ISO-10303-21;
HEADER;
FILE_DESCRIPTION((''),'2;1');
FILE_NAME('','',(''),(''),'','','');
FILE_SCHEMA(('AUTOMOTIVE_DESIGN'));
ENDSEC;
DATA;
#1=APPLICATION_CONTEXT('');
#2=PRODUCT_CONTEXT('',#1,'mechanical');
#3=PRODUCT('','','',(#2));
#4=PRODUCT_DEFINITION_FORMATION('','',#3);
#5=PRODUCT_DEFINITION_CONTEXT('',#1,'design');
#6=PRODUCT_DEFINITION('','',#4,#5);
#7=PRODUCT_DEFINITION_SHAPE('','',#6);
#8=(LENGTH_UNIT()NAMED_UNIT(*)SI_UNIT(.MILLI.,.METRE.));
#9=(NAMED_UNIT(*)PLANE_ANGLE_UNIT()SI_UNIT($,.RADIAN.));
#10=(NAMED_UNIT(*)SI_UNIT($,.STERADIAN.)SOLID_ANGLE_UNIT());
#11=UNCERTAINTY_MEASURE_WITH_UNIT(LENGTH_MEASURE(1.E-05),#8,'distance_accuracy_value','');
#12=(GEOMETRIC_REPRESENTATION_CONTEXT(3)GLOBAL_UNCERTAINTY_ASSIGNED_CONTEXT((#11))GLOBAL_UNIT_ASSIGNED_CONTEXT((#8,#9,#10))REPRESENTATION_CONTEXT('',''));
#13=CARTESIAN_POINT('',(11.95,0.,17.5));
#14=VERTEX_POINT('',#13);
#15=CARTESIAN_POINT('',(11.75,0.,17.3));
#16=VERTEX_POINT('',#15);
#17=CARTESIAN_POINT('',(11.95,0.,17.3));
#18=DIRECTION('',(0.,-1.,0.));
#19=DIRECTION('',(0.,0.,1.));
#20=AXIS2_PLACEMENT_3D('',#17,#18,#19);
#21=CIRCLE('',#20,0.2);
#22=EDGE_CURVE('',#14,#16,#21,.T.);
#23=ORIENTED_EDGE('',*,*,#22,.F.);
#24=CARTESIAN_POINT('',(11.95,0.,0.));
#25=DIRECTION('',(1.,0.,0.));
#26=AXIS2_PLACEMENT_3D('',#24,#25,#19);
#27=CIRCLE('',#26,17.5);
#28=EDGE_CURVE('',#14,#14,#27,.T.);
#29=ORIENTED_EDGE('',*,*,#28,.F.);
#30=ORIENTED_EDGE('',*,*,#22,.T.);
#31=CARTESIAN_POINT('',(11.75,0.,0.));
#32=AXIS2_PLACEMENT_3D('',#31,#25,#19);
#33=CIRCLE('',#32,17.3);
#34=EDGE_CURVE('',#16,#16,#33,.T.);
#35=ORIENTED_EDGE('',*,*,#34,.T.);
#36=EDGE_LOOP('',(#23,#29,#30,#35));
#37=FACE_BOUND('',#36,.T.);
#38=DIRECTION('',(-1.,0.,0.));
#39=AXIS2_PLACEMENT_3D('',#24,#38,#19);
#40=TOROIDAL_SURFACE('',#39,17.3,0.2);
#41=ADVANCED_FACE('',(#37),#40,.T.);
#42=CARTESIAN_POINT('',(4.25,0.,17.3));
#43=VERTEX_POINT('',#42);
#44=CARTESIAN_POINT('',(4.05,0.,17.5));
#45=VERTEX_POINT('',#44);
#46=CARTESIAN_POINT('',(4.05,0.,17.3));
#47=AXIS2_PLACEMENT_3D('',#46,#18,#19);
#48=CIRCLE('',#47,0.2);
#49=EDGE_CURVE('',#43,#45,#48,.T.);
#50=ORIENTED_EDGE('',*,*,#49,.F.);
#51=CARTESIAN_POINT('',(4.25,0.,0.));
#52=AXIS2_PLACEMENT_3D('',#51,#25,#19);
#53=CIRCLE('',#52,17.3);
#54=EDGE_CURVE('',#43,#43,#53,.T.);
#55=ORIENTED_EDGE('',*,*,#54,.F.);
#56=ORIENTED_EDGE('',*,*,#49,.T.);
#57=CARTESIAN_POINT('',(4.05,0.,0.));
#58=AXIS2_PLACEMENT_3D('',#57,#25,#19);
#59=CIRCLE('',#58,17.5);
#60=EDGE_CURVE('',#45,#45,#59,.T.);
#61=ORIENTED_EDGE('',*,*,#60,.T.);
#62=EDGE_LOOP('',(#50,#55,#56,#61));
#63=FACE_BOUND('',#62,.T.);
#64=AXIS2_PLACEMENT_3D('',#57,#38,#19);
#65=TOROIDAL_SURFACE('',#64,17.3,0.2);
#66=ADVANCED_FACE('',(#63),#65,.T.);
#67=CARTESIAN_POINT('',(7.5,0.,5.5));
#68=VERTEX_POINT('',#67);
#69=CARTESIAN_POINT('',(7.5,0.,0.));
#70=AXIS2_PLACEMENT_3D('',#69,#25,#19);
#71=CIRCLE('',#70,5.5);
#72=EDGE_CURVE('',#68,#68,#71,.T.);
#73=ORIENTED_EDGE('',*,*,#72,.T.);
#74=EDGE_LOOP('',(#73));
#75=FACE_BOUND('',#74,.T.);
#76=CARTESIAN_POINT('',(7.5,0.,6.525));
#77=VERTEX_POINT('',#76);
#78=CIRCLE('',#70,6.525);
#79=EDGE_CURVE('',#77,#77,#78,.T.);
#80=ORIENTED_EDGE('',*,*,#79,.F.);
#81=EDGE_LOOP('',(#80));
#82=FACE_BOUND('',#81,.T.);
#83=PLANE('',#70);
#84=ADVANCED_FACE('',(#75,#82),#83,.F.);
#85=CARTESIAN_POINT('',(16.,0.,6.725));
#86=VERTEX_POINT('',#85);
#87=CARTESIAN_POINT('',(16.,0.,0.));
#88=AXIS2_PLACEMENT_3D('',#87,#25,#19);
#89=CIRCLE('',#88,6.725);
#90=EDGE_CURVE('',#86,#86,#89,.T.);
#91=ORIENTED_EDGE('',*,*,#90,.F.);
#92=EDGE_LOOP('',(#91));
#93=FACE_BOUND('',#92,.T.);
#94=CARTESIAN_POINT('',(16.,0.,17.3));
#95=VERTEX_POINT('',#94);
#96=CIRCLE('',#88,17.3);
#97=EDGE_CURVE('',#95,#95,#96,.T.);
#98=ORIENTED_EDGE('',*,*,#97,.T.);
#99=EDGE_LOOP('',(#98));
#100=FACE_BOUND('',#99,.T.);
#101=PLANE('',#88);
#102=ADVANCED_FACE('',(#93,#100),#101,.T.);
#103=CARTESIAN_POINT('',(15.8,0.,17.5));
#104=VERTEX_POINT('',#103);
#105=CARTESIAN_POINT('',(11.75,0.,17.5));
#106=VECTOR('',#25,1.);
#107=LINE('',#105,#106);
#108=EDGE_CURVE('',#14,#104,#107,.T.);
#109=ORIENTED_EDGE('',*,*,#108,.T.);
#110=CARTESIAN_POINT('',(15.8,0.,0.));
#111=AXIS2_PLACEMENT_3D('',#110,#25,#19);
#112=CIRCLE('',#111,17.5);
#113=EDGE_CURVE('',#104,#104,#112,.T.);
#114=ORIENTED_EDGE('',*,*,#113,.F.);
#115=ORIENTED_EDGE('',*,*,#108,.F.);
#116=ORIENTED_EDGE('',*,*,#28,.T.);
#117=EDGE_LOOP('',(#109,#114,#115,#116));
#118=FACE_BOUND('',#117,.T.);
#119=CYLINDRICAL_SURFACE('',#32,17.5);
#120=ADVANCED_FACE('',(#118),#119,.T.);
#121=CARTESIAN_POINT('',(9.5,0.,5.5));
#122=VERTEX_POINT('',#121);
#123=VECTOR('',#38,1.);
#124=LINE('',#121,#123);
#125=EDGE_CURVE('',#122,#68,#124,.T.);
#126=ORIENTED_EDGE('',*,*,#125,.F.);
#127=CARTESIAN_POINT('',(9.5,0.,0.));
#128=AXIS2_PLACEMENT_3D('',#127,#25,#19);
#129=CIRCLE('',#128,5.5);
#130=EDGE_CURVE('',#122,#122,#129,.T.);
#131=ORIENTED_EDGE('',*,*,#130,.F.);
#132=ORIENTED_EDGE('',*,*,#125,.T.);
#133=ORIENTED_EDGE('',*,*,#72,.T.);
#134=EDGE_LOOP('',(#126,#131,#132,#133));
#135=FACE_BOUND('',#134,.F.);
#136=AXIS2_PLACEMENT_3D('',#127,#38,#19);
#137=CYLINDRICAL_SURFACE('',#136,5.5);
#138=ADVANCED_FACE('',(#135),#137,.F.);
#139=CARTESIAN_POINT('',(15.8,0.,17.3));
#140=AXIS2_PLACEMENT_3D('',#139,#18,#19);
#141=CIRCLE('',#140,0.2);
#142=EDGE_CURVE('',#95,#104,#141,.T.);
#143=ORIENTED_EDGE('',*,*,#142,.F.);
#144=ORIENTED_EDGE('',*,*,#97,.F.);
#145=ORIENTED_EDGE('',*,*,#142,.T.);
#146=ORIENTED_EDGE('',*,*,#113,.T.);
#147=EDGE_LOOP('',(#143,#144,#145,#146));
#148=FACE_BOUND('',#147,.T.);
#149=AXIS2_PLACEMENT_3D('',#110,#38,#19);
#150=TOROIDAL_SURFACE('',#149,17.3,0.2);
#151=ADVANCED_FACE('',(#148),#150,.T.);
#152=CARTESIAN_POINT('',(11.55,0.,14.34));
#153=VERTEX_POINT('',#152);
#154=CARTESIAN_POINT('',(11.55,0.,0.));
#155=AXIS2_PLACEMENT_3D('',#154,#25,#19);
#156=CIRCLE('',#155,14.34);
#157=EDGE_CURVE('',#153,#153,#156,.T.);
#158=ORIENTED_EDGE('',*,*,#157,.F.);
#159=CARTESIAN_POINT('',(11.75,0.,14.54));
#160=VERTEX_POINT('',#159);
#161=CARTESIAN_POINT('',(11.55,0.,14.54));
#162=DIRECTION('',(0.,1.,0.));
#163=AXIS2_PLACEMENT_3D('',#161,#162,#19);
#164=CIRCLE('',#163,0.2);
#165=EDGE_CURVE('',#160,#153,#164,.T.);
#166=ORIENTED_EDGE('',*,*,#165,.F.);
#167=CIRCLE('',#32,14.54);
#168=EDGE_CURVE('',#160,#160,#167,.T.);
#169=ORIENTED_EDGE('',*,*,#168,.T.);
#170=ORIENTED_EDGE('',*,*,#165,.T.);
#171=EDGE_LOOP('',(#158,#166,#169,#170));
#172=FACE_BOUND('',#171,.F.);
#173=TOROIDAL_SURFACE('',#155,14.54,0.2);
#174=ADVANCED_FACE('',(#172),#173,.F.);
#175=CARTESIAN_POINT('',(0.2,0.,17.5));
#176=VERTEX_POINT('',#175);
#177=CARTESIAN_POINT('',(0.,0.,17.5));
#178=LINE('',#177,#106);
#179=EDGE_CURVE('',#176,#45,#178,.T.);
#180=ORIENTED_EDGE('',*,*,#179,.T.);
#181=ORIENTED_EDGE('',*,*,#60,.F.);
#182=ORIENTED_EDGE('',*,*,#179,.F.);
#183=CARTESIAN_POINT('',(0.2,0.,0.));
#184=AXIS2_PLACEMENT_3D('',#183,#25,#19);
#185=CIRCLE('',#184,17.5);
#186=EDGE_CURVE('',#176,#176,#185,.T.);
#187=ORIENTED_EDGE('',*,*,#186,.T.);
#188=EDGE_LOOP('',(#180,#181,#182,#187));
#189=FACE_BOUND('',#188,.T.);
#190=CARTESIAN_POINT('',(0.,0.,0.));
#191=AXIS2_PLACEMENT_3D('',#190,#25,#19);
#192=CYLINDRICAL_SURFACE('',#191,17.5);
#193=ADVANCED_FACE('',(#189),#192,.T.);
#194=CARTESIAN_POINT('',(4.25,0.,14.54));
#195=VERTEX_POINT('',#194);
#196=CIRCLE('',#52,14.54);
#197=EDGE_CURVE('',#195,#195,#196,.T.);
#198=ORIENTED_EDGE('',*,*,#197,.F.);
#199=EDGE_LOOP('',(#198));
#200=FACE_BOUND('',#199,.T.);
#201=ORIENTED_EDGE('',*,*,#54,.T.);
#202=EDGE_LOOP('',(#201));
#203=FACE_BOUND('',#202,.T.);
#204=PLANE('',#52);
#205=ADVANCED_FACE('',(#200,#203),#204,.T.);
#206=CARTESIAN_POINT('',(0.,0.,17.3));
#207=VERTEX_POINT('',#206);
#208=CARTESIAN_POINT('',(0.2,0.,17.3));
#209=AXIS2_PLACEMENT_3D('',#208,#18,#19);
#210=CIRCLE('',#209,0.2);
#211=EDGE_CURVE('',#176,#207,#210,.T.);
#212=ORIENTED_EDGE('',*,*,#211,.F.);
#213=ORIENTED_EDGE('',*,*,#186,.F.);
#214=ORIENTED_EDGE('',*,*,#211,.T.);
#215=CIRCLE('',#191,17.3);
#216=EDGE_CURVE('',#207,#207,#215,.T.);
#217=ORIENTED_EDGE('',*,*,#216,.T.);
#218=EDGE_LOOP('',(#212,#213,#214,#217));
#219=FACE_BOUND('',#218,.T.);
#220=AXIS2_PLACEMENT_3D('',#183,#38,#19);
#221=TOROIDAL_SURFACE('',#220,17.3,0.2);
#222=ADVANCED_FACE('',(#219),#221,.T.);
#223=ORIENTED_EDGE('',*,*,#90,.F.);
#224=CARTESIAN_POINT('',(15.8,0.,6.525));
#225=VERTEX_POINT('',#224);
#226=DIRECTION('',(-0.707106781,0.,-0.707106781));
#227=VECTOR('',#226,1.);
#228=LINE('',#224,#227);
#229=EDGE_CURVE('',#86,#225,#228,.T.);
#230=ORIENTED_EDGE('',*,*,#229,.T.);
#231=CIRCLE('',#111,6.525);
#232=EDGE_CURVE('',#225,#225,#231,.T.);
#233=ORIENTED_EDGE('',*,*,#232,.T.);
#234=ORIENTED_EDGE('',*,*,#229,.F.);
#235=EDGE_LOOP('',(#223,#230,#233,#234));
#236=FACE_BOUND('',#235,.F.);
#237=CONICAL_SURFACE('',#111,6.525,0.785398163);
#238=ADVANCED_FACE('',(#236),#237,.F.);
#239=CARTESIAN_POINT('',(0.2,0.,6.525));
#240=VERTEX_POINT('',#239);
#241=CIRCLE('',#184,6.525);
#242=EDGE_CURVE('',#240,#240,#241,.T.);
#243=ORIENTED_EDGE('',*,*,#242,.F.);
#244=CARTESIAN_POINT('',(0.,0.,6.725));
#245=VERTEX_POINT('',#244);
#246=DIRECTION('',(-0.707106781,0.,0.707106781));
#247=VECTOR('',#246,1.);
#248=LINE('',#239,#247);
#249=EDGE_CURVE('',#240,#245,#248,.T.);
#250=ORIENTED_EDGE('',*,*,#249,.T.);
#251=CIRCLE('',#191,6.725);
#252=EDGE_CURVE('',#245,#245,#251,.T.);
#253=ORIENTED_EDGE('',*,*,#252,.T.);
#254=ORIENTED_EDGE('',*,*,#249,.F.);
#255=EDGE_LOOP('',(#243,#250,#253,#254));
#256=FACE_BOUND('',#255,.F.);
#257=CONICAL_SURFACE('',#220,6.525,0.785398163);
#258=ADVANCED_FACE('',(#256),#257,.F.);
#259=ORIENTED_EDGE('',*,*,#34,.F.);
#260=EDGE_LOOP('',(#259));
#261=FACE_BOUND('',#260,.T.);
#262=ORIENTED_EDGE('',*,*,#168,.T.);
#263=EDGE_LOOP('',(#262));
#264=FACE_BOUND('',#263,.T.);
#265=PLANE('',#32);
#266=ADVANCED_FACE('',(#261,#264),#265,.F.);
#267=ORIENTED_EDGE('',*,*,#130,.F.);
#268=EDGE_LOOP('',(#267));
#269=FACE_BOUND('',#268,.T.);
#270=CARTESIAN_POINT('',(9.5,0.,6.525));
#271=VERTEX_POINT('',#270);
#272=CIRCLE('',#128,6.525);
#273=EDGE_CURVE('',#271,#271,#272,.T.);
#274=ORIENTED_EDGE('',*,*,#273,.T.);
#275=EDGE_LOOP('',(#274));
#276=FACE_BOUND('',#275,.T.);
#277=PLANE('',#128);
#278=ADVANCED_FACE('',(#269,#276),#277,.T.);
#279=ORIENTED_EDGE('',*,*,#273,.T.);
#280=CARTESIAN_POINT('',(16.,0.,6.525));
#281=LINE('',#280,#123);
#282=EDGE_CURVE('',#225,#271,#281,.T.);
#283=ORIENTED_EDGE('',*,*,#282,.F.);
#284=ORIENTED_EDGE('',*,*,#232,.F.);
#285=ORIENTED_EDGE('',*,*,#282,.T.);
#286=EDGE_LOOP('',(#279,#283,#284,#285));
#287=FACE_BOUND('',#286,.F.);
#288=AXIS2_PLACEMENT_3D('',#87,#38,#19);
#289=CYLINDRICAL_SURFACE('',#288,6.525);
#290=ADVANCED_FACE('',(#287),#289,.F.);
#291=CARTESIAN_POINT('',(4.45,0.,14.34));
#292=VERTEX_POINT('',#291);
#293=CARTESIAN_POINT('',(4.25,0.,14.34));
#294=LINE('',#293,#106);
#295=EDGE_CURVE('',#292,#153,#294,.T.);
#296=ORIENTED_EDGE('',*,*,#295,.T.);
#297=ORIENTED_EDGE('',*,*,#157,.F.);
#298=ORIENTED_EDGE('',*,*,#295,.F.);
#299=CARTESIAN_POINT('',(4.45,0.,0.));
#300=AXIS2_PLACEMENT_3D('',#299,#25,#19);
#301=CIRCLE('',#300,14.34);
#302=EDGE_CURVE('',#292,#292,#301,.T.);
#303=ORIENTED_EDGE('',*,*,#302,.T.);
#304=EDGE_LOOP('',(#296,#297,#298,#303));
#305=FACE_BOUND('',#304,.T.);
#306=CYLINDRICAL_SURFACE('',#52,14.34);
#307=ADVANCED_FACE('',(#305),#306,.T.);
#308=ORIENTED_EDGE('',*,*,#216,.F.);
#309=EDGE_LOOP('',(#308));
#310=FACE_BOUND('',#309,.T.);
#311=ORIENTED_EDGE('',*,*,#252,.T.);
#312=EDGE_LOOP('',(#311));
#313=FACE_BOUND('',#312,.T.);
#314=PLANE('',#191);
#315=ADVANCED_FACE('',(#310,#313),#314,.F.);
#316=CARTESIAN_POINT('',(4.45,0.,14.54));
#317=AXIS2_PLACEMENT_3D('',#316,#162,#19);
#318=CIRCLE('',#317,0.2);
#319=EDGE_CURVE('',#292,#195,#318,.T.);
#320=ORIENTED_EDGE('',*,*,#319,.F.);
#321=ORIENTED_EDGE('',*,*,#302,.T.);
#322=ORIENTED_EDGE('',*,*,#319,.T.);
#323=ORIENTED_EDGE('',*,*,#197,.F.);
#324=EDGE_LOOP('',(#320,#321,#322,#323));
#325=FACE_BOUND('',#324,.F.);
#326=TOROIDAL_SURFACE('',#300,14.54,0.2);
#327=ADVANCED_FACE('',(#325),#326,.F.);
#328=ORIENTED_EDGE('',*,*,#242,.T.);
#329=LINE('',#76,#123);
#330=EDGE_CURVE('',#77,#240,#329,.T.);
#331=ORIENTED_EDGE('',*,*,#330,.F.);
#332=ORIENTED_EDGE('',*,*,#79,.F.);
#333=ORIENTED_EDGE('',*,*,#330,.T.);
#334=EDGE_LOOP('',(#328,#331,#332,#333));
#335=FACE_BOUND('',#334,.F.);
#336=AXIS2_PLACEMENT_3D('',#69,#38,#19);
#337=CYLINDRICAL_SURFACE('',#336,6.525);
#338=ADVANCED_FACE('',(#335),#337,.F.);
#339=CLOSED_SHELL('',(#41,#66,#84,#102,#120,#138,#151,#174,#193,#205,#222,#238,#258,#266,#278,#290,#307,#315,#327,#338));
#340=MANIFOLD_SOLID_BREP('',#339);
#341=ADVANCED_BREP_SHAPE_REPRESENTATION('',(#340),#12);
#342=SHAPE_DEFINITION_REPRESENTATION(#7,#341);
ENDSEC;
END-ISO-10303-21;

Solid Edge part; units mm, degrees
sketch "Sketch1" plane through (0, 0, 0) normal (0, -1, 0) x (1, 0, 0)
  line L0 (11.75, 17.5) -> (16, 17.5)
  line L1 (16, 17.5) -> (16, 6.525)
  line L2 (16, 6.525) -> (9.5, 6.525)
  line L3 (9.5, 6.525) -> (9.5, 5.5)
  line L4 (9.5, 5.5) -> (7.5, 5.5)
  line L5 (7.5, 5.5) -> (7.5, 6.525)
  line L6 (7.5, 6.525) -> (0, 6.525)
  line L7 (0, 6.525) -> (0, 17.5)
  line L8 (0, 17.5) -> (4.25, 17.5)
  line L9 (4.25, 17.5) -> (4.25, 14.34)
  line L10 (4.25, 14.34) -> (11.75, 14.34)
  line L11 (11.75, 14.34) -> (11.75, 17.5)
revolve "RevolvedProtrusion1" add sketch "Sketch1" angle 360 about axis through (0, 0, 0) along (1, 0, 0)
chamfer "Chamfer1" distance 0.2 angle 45 2 edges at (16, 0, -6.525) (0, 0, -6.525)
fillet "Verrundung_1" radius 0.2 6 edges at (11.75, 0, -14.34) (4.25, 0, -14.34) (4.25, 0, -17.5) (0, 0, -17.5) (11.75, 0, -17.5) (16, 0, -17.5)
